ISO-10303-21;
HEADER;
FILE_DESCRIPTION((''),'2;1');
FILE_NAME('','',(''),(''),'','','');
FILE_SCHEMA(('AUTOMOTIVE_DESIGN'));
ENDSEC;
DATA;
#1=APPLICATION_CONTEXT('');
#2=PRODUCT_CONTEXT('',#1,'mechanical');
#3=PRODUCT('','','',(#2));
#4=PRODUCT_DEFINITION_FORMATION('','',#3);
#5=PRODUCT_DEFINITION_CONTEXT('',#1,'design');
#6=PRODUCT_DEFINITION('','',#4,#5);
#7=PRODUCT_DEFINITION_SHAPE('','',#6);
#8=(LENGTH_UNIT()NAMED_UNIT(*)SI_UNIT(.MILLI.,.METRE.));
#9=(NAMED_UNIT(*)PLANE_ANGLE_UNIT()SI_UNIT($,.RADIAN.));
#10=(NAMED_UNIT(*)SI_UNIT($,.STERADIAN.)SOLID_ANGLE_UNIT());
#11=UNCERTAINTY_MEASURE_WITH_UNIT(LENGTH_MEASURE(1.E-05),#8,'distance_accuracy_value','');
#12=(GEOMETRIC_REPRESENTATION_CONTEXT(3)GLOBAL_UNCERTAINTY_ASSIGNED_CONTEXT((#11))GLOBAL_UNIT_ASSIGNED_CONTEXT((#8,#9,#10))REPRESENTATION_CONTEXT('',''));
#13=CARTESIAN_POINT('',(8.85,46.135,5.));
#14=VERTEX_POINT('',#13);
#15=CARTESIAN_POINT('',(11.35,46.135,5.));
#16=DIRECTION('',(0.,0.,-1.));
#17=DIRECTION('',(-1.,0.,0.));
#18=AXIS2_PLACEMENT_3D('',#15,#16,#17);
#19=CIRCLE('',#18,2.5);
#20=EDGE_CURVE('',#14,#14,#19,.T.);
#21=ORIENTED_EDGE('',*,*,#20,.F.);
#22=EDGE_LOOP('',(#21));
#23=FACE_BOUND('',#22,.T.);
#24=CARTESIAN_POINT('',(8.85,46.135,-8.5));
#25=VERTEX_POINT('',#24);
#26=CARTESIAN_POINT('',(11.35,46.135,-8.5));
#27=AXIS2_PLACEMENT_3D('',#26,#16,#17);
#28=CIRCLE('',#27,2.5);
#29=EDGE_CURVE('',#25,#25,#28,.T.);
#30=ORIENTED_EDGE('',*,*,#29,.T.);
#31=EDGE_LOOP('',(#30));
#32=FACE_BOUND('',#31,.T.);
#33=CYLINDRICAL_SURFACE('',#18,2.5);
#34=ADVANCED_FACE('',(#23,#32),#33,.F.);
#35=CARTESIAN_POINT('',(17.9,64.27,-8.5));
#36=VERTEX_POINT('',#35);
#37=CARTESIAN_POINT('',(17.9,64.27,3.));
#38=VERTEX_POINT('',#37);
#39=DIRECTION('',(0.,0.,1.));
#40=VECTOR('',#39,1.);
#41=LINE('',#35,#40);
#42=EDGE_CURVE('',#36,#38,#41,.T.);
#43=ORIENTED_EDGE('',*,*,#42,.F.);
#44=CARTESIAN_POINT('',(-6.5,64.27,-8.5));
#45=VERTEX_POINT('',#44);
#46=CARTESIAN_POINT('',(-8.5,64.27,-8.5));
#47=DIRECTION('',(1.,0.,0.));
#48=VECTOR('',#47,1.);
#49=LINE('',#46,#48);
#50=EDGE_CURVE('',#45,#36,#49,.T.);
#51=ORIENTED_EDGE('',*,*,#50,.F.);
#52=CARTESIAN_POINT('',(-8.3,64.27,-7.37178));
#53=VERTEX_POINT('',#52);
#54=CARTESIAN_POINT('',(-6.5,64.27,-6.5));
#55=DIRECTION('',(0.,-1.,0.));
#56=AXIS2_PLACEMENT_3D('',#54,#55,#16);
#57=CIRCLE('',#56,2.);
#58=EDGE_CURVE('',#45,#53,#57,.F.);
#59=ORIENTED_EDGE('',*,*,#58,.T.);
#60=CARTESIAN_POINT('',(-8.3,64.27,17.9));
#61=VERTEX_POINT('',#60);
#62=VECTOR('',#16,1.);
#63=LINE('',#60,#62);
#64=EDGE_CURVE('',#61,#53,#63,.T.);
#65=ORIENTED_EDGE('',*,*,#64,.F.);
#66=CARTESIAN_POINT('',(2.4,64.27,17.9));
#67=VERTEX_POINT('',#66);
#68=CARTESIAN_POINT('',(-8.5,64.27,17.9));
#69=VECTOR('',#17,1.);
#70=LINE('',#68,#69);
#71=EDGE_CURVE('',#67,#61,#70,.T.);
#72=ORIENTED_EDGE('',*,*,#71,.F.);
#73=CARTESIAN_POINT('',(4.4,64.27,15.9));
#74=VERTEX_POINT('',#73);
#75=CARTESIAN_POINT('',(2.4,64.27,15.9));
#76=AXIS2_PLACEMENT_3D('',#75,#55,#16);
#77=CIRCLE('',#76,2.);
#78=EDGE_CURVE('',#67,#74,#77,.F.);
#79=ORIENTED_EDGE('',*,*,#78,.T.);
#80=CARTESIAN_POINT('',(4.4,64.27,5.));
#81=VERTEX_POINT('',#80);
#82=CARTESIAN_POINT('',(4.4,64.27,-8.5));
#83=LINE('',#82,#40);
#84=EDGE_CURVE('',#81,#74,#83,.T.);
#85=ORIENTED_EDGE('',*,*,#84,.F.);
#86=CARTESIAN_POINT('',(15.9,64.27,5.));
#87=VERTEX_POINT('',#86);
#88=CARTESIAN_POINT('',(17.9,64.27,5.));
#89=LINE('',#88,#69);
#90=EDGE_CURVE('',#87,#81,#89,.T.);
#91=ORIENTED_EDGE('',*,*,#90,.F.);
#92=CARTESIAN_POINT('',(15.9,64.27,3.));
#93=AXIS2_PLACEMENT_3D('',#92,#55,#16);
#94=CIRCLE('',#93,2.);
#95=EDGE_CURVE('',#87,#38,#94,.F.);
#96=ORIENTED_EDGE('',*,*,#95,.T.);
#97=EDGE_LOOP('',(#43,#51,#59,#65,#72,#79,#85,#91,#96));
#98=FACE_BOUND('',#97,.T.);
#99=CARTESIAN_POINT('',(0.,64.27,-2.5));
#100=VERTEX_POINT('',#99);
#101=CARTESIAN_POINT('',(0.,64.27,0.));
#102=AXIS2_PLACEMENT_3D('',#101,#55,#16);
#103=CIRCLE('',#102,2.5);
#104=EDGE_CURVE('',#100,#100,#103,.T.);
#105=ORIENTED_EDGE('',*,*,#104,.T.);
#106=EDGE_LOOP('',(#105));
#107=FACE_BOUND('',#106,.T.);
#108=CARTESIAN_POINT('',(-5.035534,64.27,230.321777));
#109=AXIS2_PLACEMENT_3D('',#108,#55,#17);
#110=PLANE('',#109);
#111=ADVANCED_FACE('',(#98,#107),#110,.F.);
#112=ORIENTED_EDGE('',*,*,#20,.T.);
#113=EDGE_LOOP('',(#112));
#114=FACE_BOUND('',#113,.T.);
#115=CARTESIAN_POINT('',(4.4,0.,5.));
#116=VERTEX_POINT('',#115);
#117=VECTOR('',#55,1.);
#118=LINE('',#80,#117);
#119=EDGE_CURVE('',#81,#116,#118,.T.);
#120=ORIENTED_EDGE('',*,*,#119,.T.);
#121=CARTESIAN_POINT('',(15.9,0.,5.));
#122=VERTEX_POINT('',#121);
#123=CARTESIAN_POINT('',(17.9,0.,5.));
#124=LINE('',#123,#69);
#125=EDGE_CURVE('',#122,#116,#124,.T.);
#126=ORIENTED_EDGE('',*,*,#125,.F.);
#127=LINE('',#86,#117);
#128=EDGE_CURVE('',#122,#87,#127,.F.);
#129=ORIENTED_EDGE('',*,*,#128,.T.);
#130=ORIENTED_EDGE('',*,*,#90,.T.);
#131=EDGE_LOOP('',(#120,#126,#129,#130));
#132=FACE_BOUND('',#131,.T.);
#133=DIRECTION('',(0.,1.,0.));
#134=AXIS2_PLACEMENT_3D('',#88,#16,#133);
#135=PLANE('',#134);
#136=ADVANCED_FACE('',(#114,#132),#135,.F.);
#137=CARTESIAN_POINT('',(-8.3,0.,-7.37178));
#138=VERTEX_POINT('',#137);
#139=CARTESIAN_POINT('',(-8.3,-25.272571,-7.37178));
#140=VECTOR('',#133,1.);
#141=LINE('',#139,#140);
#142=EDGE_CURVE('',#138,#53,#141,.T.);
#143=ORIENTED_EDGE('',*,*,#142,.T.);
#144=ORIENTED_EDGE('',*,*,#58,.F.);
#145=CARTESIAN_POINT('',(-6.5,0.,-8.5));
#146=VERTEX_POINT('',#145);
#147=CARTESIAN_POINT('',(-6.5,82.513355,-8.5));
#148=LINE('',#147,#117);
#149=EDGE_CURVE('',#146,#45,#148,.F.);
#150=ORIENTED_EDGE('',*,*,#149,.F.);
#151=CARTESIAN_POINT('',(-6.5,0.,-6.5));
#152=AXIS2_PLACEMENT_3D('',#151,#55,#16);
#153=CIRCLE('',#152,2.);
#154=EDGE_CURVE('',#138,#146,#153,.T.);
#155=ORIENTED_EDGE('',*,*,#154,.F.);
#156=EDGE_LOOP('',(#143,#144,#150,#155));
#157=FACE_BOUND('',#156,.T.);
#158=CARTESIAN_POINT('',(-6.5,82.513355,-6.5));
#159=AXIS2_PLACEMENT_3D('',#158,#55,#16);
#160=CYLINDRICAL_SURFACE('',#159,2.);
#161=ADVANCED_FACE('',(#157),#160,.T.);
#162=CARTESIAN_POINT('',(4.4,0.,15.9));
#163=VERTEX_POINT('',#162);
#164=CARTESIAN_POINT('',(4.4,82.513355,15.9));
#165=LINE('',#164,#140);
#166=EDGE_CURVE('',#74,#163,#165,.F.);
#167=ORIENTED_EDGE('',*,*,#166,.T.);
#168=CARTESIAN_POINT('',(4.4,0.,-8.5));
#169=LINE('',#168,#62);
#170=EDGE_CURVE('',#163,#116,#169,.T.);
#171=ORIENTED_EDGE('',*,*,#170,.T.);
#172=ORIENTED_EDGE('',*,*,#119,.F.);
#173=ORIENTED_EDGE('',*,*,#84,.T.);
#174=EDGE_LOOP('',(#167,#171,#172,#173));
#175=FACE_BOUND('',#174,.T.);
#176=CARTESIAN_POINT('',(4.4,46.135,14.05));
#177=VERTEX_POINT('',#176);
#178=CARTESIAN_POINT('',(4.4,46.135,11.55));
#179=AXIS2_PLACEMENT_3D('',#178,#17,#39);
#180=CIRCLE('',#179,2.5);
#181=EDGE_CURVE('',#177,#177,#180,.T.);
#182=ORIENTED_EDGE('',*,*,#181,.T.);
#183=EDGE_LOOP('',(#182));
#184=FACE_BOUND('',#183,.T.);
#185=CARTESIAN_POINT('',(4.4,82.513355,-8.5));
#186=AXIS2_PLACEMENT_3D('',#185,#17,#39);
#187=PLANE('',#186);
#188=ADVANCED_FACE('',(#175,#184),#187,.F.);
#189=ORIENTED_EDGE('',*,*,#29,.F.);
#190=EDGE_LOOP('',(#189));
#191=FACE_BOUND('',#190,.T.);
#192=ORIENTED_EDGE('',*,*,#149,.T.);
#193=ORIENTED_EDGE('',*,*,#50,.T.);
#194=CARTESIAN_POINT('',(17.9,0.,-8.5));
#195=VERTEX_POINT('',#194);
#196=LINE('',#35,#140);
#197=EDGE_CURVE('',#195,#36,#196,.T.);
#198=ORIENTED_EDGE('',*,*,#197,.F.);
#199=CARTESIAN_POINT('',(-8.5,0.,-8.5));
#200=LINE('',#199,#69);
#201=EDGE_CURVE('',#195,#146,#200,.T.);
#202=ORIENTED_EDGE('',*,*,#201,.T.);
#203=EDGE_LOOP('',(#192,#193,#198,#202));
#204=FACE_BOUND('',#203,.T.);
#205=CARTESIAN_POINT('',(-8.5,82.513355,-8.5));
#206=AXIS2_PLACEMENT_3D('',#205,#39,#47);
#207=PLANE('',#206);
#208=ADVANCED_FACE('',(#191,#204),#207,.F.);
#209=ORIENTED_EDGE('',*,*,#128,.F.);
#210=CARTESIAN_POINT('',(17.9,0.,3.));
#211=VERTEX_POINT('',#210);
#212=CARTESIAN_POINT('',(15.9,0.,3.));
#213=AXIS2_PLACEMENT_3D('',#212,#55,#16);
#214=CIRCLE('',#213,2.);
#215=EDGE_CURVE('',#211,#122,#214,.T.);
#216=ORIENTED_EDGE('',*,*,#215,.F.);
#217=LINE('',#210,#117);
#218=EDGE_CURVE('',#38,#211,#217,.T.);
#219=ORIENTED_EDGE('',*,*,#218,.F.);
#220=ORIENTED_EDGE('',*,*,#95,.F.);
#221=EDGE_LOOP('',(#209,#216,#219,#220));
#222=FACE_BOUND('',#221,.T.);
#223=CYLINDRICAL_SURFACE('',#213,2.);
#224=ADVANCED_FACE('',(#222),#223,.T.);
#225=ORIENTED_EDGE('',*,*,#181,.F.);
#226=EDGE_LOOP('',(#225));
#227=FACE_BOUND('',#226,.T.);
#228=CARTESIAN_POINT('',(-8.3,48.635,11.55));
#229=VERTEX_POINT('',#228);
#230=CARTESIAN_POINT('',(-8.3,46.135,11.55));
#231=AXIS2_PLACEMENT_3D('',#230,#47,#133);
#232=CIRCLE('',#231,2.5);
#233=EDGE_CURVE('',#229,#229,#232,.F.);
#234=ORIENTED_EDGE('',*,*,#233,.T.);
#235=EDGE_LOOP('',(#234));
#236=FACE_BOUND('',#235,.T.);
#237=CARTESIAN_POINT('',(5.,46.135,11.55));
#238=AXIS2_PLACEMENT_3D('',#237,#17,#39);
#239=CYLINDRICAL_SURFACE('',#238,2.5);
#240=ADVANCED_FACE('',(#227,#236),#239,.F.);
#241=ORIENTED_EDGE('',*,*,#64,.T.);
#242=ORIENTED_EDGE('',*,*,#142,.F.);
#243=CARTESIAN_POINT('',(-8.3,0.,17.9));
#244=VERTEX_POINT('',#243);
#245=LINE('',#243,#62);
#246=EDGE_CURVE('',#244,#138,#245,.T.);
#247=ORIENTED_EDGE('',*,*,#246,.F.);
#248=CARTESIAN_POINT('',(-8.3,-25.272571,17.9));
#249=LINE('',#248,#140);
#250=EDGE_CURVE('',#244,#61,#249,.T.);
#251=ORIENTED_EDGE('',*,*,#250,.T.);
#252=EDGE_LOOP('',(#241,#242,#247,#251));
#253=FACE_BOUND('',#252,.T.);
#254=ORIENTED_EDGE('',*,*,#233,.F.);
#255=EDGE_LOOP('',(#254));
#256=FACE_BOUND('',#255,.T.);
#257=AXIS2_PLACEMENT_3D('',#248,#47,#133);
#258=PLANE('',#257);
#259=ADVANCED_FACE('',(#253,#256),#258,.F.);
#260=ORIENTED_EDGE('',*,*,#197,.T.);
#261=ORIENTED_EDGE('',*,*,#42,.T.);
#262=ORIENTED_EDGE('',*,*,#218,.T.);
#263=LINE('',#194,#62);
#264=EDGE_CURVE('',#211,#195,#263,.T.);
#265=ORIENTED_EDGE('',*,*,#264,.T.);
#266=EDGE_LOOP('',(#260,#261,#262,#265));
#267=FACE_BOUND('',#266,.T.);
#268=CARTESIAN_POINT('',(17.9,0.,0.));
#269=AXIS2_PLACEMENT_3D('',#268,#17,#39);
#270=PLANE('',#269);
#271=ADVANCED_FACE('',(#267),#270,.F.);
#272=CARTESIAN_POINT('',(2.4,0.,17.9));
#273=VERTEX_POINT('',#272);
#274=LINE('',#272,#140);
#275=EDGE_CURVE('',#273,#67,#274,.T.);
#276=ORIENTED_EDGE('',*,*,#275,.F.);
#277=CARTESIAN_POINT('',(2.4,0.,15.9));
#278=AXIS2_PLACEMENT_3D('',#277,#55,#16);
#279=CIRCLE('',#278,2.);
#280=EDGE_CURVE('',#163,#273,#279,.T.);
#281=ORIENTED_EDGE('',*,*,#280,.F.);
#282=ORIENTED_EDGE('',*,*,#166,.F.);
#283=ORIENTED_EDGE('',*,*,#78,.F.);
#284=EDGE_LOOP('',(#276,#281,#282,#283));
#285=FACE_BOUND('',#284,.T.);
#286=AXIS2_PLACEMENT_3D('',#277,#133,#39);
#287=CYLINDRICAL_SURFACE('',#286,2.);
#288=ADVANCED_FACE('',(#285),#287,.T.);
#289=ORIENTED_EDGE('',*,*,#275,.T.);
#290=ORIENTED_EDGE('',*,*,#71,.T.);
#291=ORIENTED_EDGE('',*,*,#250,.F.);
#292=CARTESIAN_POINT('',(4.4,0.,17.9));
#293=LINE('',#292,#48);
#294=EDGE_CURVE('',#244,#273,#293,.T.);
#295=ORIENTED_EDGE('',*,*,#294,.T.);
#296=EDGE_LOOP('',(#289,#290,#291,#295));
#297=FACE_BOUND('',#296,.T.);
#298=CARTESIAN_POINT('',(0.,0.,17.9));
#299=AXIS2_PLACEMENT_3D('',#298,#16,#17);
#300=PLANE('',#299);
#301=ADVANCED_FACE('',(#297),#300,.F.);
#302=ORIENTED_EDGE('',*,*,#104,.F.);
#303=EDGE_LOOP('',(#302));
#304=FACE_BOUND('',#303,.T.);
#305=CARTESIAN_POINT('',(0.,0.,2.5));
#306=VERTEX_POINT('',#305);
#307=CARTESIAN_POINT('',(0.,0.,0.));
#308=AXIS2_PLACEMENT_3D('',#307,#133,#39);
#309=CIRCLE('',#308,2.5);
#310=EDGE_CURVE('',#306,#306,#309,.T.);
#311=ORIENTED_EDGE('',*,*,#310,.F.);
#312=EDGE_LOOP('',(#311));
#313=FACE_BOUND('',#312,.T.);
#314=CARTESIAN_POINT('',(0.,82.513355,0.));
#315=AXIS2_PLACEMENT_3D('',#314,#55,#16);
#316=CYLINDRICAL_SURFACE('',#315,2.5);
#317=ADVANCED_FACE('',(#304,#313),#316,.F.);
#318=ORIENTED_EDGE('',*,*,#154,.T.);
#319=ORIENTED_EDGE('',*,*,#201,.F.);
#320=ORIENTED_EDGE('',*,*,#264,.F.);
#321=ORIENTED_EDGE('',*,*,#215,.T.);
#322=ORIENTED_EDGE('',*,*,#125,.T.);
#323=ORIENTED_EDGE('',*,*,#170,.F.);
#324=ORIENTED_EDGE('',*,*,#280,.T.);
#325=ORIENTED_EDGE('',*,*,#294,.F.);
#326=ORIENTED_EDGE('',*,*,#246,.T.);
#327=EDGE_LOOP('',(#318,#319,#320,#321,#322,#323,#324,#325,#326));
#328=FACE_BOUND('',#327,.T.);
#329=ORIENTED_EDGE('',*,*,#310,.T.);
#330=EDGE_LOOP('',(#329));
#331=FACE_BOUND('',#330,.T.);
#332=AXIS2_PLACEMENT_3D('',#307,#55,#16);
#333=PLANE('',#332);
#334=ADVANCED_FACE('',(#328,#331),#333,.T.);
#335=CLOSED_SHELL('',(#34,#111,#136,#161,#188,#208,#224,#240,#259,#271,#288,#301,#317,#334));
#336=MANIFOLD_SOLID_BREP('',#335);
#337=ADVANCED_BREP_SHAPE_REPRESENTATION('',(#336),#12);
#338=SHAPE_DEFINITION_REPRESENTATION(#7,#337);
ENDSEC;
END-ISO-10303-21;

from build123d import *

# Parameters (mm, degrees)
HOLE_TOPMAIN_OUTLINE_W = 12.9
HOLE_TOPMAIN_OUTLINE_H = 12.9
HOLE_TOPMAIN_OUTLINE_R = 2.5
HOLE_TOPMAIN_DEPTH     = 64.27
SKETCH14_R             = 2.5
CUT_EXTRUDE9_DEPTH     = 67.100627077
SKETCH15_R             = 3.25
CUT_EXTRUDE10_DEPTH    = 66.309210028
SKETCH18_W             = 12.9
SKETCH18_H             = 64.27
SKETCH18_R             = 3.25
BOSS_EXTRUDE2_DEPTH    = 13.5
FILLET3_R              = 2
SKETCH19_R             = 2.5
CUT_EXTRUDE11_DEPTH    = 13.5
SKETCH22_W             = 13.5
SKETCH22_H             = 64.27
BOSS_EXTRUDE3_DEPTH    = 13.5
BOSS_EXTRUDE5_START    = -26.4
SKETCH24_R             = 3.25
BOSS_EXTRUDE5_DEPTH    = 26.4
CUT_EXTRUDE12_START    = -64.27
SKETCH25_R             = 2.5
CUT_EXTRUDE12_DEPTH    = 64.27
SKETCH26_R             = 2.5
CUT_EXTRUDE13_DEPTH    = 13.5
SKETCH28_R             = 2.5
CUT_EXTRUDE14_DEPTH    = 13.5
FILLET4_R              = 2
SKETCH29_W             = 0.2
SKETCH29_H             = 25.271779789
CUT_EXTRUDE15_DEPTH    = 64.27


# Read off the part's stored shape, not the designer's step: hole-TopMain
with BuildPart() as part:
    # hole-TopMain outline → hole-TopMain (new body)
    with BuildSketch(Plane(origin=(0, 0, 0), x_dir=(1, 0, 0), z_dir=(0, 1, 0))):
        with Locations((-2.05, 2.05)):
            Rectangle(HOLE_TOPMAIN_OUTLINE_W, HOLE_TOPMAIN_OUTLINE_H)
        Circle(HOLE_TOPMAIN_OUTLINE_R, mode=Mode.SUBTRACT)
    extrude(amount=HOLE_TOPMAIN_DEPTH)

    # Sketch14 → Cut-Extrude9 (cut, through all)
    with BuildSketch(Plane(origin=(0, 0, -8.5), x_dir=(-1, 0, 0), z_dir=(0, 0, -1))):
        with Locations((1.75, 46.135)):
            Circle(SKETCH14_R)
    extrude(amount=-CUT_EXTRUDE9_DEPTH, mode=Mode.SUBTRACT)

    # Sketch15 → Cut-Extrude10 (cut, through all)
    with BuildSketch(Plane(origin=(0, 0, -3.5), x_dir=(-1, 0, 0), z_dir=(0, 0, -1))):
        with Locations((1.75, 46.135)):
            Circle(SKETCH15_R)
    extrude(amount=-CUT_EXTRUDE10_DEPTH, mode=Mode.SUBTRACT)

    # Sketch18 → Boss-Extrude2 (add)
    with BuildSketch(Plane.XY.offset(4.4)):
        with Locations((-2.05, 32.135)):
            Rectangle(SKETCH18_W, SKETCH18_H)
        with Locations(Location((-1.75, 46.135, 0), (0, 0, 180))):
            Circle(SKETCH18_R, mode=Mode.SUBTRACT)
    extrude(amount=BOSS_EXTRUDE2_DEPTH)

    # Fillet3
    fillet3_edges = [part.edges().sort_by_distance(p)[0] for p in [
        (-8.5, 32.135, -8.5),
        (4.4, 32.135, 17.9),
    ]]
    fillet(fillet3_edges, radius=FILLET3_R)

    # Sketch19 → Cut-Extrude11 (cut)
    with BuildSketch(Plane.ZY.offset(8.5)):
        with Locations((11.55, 46.135)):
            Circle(SKETCH19_R)
    extrude(amount=-CUT_EXTRUDE11_DEPTH, mode=Mode.SUBTRACT)

    # Sketch22 → Boss-Extrude3 (add)
    with BuildSketch(Plane(origin=(4.4, 0, 0), x_dir=(0, 0, -1), z_dir=(1, 0, 0))):
        with Locations((1.75, 32.135)):
            Rectangle(SKETCH22_W, SKETCH22_H)
    extrude(amount=BOSS_EXTRUDE3_DEPTH)

    # Sketch24 → Boss-Extrude5 (add)
    with BuildSketch(Plane.XY.offset(17.9).offset(BOSS_EXTRUDE5_START)):
        with Locations((-1.75, 46.135)):
            Circle(SKETCH24_R)
    extrude(amount=BOSS_EXTRUDE5_DEPTH)

    # Sketch25 → Cut-Extrude12 (cut)
    with BuildSketch(Plane(origin=(0, 64.27, 0), x_dir=(1, 0, 0), z_dir=(0, 1, 0)).offset(CUT_EXTRUDE12_START)):
        with Locations(Location((0, 0, 0), (0, 0, 90))):
            Circle(SKETCH25_R)
    extrude(amount=CUT_EXTRUDE12_DEPTH, mode=Mode.SUBTRACT)

    # Sketch26 → Cut-Extrude13 (cut)
    with BuildSketch(Plane.ZY.offset(8.5)):
        with Locations((11.55, 46.135)):
            Circle(SKETCH26_R)
    extrude(amount=-CUT_EXTRUDE13_DEPTH, mode=Mode.SUBTRACT)

    # Sketch28 → Cut-Extrude14 (cut)
    with BuildSketch(Plane(origin=(0, 0, -8.5), x_dir=(-1, 0, 0), z_dir=(0, 0, -1))):
        with Locations((-11.35, 46.135)):
            Circle(SKETCH28_R)
    extrude(amount=-CUT_EXTRUDE14_DEPTH, mode=Mode.SUBTRACT)

    # Fillet4
    fillet4_edges = [part.edges().sort_by_distance(p)[0] for p in [
        (17.9, 32.135, 5),
    ]]
    fillet(fillet4_edges, radius=FILLET4_R)

    # Sketch29 → Cut-Extrude15 (cut)
    with BuildSketch(Plane(origin=(0, 64.27, 0), x_dir=(1, 0, 0), z_dir=(0, 1, 0))):
        with Locations((-8.4, -5.264110106)):
            Rectangle(SKETCH29_W, SKETCH29_H)
    extrude(amount=-CUT_EXTRUDE15_DEPTH, mode=Mode.SUBTRACT)


solid = part.part
